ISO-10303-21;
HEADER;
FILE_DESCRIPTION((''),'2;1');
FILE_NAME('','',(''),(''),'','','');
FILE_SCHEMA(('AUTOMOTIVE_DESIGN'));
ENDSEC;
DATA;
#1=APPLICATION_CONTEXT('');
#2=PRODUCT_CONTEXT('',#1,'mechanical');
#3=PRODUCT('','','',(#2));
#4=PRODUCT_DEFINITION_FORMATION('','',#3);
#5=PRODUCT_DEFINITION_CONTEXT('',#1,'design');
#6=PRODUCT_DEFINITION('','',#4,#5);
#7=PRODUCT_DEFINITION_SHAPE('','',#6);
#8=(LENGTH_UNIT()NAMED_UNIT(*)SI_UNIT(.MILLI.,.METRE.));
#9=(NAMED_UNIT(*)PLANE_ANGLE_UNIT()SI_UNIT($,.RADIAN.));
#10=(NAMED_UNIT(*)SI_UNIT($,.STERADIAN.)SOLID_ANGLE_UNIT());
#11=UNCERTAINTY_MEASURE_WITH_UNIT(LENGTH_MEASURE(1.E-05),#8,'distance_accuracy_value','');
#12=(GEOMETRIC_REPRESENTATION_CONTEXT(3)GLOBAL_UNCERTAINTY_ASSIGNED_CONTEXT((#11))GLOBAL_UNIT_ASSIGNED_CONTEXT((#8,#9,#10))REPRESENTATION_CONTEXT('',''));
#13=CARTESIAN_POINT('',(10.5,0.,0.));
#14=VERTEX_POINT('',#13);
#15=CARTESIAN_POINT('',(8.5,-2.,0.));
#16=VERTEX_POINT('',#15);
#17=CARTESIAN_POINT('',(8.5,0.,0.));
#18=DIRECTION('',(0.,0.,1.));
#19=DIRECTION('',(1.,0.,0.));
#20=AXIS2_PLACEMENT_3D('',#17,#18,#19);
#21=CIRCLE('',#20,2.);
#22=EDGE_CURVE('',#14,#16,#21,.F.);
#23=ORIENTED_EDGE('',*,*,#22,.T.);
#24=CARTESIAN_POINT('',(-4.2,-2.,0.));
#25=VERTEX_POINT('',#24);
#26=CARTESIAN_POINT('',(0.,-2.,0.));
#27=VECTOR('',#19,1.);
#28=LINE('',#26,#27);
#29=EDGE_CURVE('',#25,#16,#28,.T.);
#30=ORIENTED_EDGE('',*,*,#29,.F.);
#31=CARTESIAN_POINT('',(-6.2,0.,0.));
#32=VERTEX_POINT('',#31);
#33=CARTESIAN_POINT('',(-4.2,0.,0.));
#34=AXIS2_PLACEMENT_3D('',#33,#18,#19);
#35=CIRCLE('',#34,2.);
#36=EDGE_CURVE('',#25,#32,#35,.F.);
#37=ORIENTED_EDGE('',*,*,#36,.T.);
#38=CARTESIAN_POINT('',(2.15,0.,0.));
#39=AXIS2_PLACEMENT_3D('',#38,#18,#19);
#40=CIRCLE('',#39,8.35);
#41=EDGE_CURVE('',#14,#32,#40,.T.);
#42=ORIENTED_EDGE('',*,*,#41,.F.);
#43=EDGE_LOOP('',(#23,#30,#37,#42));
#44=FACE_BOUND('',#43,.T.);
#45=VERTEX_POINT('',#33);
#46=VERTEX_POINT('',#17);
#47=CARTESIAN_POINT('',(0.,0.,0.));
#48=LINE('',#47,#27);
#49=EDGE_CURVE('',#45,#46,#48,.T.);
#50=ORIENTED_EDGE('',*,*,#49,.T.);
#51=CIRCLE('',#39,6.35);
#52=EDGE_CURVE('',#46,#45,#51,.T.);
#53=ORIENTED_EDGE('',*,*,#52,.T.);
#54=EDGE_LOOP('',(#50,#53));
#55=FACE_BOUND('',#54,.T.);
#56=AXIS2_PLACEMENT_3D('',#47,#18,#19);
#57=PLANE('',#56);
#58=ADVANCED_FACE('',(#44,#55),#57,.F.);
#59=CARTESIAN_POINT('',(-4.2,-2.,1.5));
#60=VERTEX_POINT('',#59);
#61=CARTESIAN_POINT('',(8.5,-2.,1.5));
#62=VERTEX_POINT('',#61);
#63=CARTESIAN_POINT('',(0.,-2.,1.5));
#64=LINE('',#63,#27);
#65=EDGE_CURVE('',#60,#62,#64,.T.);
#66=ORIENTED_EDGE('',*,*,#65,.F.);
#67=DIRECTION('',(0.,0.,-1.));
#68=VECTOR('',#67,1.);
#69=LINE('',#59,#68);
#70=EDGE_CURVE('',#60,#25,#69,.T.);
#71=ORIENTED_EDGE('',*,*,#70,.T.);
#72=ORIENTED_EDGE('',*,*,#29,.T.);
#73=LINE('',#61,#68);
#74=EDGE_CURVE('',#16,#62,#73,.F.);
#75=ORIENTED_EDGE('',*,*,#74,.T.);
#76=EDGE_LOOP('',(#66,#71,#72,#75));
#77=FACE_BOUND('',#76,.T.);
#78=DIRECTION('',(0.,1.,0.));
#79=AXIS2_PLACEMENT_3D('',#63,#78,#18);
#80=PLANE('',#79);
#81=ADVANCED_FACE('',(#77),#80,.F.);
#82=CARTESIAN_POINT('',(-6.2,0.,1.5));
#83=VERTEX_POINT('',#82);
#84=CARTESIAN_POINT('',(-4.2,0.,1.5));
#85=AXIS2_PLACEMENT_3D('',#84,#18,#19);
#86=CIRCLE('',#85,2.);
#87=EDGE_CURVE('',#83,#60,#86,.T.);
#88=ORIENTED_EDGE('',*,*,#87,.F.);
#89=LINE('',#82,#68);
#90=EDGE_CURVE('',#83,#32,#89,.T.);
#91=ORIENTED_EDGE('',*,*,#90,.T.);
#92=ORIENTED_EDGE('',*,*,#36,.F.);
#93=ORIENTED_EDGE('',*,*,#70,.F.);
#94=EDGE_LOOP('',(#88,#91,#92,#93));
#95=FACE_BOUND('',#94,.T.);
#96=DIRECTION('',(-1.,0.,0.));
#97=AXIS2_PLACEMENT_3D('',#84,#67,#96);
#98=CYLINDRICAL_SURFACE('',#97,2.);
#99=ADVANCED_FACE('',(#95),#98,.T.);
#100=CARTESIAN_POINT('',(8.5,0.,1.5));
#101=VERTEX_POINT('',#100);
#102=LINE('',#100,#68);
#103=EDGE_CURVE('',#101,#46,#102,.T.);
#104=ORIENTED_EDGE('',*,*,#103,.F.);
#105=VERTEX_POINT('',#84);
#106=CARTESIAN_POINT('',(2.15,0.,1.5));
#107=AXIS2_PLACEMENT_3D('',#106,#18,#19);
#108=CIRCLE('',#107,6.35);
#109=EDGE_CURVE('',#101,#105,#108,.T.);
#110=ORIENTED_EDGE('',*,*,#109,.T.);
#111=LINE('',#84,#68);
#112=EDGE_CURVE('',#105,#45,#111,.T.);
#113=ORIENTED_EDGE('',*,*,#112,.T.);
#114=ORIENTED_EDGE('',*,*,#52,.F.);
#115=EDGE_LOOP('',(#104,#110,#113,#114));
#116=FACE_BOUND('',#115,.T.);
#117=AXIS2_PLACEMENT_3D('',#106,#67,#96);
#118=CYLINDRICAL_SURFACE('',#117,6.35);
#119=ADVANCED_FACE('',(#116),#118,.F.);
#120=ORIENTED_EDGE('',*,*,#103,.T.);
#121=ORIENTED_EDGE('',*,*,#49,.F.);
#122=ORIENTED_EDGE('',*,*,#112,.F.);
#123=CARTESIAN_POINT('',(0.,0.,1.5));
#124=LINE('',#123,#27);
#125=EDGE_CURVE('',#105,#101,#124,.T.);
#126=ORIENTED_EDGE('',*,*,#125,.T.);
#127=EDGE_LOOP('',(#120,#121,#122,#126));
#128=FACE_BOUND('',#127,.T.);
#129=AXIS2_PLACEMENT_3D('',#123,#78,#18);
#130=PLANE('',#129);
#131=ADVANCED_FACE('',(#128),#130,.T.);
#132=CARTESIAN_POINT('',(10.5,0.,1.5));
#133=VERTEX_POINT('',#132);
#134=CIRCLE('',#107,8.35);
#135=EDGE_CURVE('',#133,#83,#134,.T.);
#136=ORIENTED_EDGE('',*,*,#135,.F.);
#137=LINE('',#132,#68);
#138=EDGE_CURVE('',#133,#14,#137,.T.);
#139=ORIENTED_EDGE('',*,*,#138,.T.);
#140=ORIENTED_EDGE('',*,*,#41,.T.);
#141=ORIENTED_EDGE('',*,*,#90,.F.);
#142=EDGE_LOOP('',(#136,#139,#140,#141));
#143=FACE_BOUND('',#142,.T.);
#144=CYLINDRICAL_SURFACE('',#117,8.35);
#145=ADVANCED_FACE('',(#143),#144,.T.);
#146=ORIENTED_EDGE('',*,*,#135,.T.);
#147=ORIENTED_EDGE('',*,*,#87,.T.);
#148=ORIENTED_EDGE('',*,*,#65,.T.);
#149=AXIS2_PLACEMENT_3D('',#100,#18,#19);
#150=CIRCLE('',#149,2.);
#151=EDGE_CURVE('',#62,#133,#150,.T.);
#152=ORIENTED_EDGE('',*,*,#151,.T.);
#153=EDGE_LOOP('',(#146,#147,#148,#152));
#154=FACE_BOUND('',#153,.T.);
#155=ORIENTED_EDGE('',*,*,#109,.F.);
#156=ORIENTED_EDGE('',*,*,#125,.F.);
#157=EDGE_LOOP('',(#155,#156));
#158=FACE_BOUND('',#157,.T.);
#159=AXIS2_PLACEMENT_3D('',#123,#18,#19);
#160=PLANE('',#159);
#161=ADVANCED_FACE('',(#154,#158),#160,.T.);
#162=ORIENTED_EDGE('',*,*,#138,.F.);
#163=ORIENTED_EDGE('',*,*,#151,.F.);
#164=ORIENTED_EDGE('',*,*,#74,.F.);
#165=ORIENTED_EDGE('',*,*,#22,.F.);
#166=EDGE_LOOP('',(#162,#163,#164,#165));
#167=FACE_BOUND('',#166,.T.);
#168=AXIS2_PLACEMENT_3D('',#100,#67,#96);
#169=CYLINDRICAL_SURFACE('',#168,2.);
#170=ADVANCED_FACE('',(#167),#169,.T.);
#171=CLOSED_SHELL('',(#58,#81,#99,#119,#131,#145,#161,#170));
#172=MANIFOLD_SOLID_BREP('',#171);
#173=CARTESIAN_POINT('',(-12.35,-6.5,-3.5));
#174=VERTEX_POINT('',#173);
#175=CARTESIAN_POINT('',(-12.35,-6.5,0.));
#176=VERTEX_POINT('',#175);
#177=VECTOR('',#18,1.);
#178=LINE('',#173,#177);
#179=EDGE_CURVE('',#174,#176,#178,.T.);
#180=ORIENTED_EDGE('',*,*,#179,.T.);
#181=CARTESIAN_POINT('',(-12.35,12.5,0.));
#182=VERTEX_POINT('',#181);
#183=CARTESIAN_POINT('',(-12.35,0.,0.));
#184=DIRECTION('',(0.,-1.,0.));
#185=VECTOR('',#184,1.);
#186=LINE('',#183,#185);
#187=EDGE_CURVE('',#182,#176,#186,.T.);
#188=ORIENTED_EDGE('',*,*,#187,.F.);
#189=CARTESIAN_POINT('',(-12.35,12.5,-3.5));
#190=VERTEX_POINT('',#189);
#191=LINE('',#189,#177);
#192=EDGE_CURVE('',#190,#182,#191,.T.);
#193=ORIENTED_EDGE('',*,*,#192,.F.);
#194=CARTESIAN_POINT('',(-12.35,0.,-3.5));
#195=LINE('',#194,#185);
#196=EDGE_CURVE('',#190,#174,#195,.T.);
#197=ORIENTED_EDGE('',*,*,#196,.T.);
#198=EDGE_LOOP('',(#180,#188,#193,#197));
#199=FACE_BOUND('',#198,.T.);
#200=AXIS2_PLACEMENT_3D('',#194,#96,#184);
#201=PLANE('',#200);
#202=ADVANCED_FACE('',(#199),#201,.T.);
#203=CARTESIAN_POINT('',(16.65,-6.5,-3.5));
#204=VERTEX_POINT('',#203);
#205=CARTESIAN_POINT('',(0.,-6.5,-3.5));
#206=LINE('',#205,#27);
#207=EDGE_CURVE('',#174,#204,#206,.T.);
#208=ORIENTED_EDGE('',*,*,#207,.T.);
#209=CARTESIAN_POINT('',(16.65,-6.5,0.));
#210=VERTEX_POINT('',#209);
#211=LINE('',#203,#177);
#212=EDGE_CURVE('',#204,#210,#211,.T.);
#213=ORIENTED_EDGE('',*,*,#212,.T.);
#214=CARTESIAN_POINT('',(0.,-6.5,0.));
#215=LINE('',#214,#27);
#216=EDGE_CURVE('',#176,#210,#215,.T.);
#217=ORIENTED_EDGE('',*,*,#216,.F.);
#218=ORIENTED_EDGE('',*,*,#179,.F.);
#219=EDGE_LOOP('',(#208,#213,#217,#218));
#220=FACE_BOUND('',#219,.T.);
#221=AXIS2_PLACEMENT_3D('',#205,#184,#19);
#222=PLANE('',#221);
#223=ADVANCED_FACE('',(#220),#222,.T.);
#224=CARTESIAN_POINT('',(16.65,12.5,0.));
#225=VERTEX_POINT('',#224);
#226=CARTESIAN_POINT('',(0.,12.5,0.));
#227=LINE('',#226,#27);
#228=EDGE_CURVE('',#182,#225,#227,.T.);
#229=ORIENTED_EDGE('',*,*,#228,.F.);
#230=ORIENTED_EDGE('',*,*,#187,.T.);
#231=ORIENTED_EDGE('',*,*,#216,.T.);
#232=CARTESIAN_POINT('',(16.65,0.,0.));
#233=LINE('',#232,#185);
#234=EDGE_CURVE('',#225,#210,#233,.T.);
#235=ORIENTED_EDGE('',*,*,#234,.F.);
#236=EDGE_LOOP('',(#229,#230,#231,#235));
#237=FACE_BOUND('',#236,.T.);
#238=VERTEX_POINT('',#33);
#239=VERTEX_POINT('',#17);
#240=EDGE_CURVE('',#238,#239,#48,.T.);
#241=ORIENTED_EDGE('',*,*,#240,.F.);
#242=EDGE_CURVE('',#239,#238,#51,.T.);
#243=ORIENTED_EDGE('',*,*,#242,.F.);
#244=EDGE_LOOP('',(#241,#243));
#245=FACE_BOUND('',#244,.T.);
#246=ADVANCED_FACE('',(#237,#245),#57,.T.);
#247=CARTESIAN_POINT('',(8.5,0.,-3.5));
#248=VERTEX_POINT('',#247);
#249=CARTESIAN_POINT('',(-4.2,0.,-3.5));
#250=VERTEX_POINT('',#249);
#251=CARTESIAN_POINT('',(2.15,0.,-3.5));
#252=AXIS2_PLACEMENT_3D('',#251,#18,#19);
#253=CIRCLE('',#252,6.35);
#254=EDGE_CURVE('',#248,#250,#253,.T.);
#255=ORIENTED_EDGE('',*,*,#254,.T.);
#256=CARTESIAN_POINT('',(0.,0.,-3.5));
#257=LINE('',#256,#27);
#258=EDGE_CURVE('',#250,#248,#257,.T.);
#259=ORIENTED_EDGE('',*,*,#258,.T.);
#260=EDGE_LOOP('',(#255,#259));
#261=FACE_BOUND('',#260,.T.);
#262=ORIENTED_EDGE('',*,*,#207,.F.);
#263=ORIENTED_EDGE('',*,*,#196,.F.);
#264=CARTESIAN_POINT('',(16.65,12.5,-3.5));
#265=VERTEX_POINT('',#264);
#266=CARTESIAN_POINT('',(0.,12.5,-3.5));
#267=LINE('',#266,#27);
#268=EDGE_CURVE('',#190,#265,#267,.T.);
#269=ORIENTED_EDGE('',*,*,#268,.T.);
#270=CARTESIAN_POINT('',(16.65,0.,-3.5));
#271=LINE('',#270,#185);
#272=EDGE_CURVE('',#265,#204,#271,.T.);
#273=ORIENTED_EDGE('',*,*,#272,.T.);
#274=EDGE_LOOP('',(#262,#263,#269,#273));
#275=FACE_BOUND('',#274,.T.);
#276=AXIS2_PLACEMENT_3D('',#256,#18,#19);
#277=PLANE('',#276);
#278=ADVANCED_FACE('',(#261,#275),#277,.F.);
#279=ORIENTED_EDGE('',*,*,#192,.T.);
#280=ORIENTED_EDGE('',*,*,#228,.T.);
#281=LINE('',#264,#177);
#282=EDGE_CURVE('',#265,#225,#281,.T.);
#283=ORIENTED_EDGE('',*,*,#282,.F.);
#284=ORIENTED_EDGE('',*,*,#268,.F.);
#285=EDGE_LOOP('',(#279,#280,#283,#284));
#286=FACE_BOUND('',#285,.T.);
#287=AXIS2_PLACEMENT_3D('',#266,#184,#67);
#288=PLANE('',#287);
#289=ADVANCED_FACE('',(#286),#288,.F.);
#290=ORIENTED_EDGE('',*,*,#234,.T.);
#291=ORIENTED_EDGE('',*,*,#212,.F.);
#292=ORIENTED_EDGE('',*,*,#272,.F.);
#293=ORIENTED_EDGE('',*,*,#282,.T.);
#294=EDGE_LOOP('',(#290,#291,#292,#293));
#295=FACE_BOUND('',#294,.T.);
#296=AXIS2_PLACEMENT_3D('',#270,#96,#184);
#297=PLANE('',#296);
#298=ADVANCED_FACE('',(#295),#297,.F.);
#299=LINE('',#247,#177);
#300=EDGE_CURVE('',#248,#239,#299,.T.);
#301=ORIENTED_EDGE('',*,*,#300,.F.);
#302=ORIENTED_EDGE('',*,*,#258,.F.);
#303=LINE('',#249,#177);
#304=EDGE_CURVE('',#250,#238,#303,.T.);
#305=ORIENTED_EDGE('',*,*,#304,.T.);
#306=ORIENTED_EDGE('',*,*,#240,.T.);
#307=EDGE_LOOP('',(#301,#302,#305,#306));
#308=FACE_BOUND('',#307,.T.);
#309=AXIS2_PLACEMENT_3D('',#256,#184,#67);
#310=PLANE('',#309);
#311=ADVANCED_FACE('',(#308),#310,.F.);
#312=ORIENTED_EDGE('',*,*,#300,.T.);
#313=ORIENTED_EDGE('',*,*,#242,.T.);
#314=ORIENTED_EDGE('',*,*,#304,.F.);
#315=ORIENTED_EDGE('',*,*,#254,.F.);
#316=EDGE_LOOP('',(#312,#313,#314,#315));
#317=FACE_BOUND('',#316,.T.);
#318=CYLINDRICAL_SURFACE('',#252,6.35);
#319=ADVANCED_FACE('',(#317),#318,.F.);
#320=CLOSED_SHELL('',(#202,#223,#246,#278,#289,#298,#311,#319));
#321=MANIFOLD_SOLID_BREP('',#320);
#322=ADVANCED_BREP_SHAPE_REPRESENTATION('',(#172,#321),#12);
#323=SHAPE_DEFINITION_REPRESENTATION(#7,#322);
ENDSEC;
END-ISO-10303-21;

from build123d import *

# Parameters (mm, degrees)
CAP_ALIGNMENT_LIP_DEPTH = 1.5
SKETCH1_3_W             = 29
SKETCH1_3_H             = 19
CAP_BODY_DEPTH          = 3.5
LIP_CORNER_FILLET_R     = 2


with BuildPart() as part:
    # Sketch1 → cap alignment lip (new body)
    with BuildSketch(Plane.XY):
        with BuildLine():
            Line((10.5, -2), (10.5, 0))
            ThreePointArc((10.5, 0), (2.15, 8.35), (-6.2, 0))
            Line((-6.2, 0), (-6.2, -2))
            Line((-6.2, -2), (10.5, -2))
        make_face()
        with BuildLine():
            ThreePointArc((8.5, 0), (2.15, 6.35), (-4.2, 0))
            Line((-4.2, 0), (8.5, 0))
        make_face(mode=Mode.SUBTRACT)
    extrude(amount=CAP_ALIGNMENT_LIP_DEPTH)

    # lip corner fillet
    lip_corner_fillet_edges = [part.edges().sort_by_distance(p)[0] for p in [
        (-6.2, -2, 0.75),
        (10.5, -2, 0.75),
    ]]
    fillet(lip_corner_fillet_edges, radius=LIP_CORNER_FILLET_R - 0.0001)  # a hair under: the kernel refuses the full size


with BuildPart() as body_2:
    # Sketch1<3> → cap body (new body)
    # profile 1 of 2: a face of its own
    with BuildSketch(Plane.XY):
        with Locations((2.15, 3)):
            Rectangle(SKETCH1_3_W, SKETCH1_3_H)
        with BuildLine():
            ThreePointArc((10.5, 0), (2.15, 8.35), (-6.2, 0))
            Line((-6.2, 0), (-6.2, -2))
            Line((-6.2, -2), (10.5, -2))
            Line((10.5, -2), (10.5, 0))
        make_face(mode=Mode.SUBTRACT)
    # profile 2 of 2: a face of its own
    with BuildSketch(Plane.XY):
        with BuildLine():
            Line((10.5, -2), (10.5, 0))
            ThreePointArc((10.5, 0), (2.15, 8.35), (-6.2, 0))
            Line((-6.2, 0), (-6.2, -2))
            Line((-6.2, -2), (10.5, -2))
        make_face()
        with BuildLine():
            ThreePointArc((8.5, 0), (2.15, 6.35), (-4.2, 0))
            Line((-4.2, 0), (8.5, 0))
        make_face(mode=Mode.SUBTRACT)
    extrude(amount=-CAP_BODY_DEPTH)


solid = Compound([part.part, body_2.part])
